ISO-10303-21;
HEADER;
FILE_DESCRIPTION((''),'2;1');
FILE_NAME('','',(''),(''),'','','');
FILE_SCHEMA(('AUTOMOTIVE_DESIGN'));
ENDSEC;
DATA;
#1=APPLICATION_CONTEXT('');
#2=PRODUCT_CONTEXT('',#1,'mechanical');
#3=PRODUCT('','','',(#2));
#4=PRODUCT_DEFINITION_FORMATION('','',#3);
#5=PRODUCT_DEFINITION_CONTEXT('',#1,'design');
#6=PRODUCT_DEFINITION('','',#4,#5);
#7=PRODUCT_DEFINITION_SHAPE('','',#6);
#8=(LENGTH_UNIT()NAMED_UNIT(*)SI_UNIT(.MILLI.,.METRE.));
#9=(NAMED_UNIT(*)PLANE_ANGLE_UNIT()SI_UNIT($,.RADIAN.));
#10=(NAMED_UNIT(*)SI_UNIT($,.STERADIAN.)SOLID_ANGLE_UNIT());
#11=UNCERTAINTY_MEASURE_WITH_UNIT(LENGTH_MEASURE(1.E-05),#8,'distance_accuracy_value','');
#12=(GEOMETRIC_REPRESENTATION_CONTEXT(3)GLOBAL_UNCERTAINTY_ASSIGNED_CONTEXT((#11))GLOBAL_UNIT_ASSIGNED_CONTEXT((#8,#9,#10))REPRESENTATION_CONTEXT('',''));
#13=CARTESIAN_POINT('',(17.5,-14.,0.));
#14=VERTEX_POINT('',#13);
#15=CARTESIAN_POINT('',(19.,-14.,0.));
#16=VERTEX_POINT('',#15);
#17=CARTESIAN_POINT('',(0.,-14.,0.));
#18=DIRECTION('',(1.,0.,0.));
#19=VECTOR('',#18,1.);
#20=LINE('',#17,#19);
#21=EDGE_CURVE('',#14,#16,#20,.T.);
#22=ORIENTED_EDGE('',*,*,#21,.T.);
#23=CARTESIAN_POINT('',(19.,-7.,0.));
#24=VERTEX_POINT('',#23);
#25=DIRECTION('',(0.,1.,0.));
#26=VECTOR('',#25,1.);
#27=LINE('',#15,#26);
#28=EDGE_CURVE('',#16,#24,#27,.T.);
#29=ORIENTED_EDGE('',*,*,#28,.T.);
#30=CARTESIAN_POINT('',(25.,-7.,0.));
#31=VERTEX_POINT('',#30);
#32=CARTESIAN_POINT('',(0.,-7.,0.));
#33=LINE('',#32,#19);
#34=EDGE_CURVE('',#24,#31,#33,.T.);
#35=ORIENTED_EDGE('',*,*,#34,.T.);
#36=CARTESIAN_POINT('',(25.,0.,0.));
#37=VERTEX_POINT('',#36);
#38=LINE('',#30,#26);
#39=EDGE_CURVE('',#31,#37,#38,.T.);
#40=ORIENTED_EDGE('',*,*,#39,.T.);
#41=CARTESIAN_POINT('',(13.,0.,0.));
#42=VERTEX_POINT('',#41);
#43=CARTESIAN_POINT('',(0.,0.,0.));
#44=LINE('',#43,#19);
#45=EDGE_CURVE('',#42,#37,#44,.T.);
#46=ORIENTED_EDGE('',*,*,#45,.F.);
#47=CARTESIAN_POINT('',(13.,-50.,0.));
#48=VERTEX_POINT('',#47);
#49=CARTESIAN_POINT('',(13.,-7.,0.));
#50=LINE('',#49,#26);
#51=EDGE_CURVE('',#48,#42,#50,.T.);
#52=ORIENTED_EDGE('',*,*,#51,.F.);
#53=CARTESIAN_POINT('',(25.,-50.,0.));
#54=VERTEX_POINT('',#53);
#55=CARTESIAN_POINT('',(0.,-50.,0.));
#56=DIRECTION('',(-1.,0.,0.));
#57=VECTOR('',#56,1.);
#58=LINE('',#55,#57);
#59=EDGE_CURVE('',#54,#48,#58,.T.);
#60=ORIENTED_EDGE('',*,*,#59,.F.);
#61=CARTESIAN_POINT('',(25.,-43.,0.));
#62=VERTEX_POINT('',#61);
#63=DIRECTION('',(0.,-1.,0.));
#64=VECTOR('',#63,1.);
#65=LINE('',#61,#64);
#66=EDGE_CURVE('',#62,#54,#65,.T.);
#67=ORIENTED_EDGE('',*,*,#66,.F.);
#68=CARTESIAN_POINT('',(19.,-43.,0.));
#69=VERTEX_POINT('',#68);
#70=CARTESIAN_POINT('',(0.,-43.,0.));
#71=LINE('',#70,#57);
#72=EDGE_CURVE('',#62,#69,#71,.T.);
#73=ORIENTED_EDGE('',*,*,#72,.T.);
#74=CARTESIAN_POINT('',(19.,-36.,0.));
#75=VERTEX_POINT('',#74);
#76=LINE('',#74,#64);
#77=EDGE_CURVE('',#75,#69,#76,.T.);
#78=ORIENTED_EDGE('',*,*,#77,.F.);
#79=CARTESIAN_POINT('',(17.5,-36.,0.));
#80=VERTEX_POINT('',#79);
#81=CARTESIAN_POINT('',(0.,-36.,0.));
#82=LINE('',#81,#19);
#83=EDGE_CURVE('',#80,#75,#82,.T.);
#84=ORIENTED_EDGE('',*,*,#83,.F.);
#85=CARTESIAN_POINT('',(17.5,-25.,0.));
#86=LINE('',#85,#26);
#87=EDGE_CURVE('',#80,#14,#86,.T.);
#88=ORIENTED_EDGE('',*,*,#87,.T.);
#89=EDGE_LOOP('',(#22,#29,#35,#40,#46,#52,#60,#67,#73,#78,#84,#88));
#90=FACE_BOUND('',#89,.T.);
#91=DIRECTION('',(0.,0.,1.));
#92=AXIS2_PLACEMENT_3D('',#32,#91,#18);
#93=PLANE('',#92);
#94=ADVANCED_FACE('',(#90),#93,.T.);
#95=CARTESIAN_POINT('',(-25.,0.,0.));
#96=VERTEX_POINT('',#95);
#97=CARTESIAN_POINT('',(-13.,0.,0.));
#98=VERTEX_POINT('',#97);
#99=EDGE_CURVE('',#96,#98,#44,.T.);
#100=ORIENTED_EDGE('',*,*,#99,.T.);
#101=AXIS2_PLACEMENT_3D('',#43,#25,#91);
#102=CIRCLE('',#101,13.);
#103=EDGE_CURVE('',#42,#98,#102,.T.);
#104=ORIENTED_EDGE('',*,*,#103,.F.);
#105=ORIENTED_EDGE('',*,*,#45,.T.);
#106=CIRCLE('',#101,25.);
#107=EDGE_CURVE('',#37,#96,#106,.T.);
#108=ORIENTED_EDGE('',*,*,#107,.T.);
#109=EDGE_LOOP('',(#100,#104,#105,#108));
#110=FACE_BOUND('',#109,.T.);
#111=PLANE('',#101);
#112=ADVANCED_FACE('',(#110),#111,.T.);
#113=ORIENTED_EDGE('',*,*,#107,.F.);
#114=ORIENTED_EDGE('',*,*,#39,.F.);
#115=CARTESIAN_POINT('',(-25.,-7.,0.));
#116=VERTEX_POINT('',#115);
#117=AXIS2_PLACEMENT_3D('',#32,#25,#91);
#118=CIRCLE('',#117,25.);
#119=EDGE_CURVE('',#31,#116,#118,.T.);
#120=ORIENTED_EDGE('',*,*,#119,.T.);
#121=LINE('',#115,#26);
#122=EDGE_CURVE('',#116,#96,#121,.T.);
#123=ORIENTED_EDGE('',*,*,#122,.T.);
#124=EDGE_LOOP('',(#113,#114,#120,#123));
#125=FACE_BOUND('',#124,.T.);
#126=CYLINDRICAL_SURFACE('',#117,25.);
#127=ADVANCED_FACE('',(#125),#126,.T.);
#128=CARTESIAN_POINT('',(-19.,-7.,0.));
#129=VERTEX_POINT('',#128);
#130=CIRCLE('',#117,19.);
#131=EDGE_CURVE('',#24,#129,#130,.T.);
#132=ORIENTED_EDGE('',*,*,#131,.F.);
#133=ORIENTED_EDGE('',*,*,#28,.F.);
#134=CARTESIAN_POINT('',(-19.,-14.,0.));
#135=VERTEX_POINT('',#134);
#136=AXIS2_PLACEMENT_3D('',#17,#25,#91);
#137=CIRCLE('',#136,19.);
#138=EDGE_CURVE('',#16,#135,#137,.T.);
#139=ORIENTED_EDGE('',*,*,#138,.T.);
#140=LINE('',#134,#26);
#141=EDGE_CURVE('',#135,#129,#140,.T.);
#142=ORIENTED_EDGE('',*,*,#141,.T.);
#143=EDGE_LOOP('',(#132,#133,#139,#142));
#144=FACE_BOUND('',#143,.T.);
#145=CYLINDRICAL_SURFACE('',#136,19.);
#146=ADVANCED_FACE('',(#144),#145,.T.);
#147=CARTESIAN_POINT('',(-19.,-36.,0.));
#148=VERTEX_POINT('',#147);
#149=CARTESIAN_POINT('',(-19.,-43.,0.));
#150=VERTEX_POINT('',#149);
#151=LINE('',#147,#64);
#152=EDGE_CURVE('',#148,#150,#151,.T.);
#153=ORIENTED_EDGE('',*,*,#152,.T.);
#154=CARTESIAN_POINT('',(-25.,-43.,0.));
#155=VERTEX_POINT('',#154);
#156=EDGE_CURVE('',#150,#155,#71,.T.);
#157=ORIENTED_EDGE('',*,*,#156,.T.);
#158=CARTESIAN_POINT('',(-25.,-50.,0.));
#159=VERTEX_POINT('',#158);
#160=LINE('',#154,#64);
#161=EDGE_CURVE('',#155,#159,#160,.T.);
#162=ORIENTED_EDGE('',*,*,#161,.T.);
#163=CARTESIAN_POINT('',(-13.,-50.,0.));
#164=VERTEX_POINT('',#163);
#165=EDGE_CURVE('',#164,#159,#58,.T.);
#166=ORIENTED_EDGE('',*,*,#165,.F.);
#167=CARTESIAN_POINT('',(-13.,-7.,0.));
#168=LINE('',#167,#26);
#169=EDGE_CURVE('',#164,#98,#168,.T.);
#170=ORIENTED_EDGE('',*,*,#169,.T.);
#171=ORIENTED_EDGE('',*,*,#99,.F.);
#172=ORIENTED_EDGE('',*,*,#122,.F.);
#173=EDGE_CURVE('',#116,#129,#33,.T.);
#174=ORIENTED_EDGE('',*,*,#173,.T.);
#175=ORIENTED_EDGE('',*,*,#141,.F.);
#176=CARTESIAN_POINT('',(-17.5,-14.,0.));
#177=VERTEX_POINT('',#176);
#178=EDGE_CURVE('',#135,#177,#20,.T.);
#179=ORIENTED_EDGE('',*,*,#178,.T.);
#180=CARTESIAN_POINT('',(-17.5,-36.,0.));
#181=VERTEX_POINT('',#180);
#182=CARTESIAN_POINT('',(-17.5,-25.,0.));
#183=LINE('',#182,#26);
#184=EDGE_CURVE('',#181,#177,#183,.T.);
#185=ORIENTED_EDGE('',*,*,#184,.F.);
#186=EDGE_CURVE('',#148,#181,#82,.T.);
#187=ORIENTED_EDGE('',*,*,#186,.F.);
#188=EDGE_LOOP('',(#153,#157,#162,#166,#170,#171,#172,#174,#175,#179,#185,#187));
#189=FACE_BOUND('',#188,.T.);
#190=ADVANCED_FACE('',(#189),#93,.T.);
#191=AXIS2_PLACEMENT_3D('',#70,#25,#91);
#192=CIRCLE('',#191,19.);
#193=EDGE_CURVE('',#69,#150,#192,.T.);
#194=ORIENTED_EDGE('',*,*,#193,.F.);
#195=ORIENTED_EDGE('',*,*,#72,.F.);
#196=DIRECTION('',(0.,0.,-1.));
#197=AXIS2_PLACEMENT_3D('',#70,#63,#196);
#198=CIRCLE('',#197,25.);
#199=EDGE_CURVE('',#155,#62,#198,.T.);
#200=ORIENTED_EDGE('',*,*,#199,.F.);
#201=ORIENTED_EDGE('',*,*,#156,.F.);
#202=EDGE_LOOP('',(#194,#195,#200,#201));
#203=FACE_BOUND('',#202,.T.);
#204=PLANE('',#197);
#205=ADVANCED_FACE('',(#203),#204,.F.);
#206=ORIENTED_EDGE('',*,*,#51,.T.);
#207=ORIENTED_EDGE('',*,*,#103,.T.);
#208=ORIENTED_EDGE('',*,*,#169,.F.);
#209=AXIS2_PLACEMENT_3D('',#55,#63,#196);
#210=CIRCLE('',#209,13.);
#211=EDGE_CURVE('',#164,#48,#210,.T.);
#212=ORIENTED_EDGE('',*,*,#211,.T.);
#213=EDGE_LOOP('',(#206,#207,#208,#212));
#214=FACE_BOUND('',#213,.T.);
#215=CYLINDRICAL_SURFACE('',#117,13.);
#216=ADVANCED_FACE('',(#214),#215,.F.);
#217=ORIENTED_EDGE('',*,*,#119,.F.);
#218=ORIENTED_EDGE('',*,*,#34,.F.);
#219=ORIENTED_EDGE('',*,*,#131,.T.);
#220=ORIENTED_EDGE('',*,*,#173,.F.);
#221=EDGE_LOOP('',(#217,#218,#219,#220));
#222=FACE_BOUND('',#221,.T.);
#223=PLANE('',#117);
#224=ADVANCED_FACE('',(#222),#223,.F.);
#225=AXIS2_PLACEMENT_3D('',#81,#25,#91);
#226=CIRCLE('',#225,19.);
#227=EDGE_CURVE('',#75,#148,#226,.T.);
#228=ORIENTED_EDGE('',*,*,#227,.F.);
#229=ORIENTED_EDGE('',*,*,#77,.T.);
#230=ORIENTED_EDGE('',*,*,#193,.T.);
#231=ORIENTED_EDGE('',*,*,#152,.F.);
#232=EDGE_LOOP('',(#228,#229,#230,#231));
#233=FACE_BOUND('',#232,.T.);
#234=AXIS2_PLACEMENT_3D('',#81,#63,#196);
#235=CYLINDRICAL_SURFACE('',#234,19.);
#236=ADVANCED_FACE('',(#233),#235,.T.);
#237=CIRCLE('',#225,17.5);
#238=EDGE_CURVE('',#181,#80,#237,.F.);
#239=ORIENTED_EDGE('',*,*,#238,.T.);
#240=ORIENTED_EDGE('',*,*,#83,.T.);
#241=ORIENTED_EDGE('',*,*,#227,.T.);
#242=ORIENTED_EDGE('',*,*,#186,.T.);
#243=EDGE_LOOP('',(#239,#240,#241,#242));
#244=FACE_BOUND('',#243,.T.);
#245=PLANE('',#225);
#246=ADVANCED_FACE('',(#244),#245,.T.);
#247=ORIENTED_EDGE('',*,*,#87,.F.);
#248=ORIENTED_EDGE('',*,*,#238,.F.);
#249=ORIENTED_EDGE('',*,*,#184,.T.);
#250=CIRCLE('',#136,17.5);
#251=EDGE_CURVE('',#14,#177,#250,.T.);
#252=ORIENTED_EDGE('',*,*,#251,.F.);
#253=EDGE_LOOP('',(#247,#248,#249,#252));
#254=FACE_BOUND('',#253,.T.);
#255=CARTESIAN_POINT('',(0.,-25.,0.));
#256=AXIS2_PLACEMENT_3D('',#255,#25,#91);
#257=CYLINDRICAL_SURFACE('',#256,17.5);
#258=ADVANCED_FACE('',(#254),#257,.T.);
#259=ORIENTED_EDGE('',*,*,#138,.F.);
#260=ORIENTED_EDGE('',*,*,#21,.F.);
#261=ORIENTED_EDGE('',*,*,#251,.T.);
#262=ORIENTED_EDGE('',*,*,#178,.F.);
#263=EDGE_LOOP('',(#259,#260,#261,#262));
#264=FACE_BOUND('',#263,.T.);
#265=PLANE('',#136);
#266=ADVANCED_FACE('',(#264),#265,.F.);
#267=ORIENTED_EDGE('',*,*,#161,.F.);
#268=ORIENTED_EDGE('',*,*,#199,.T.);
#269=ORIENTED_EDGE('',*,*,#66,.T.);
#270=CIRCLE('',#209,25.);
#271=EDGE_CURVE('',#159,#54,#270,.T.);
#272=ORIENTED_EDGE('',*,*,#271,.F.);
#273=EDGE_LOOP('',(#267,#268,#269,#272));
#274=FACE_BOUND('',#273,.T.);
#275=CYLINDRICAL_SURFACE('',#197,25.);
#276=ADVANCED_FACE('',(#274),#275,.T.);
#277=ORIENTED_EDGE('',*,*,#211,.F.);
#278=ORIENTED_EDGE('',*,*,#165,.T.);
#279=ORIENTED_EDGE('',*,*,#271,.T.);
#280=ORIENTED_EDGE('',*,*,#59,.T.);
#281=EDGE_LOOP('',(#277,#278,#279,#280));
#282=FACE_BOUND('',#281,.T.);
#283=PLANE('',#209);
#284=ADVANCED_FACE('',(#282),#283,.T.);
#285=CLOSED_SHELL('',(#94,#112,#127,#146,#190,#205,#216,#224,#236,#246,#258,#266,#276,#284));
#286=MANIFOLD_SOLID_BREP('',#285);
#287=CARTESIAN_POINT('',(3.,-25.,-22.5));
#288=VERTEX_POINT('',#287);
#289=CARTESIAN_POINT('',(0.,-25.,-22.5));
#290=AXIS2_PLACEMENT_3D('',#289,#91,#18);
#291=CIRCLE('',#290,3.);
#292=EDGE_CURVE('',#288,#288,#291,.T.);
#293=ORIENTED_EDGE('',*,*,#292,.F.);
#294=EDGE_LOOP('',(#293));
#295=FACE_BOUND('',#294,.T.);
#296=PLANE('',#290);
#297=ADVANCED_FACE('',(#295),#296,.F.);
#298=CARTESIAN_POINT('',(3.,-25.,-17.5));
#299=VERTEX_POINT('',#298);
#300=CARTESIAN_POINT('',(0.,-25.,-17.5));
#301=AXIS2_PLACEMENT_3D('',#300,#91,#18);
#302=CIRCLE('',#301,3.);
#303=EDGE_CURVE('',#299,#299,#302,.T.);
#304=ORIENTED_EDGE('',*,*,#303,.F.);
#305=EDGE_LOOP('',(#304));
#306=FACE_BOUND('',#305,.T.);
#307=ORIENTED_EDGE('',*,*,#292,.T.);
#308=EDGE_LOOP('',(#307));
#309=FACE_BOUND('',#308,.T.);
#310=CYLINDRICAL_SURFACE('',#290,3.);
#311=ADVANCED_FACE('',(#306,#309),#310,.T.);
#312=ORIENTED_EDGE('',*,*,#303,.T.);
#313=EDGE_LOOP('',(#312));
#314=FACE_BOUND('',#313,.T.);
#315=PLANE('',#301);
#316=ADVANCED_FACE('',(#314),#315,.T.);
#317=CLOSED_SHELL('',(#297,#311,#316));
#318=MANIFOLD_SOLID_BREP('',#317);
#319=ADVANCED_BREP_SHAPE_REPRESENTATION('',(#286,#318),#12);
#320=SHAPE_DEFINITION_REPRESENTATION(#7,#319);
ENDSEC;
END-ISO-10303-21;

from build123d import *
from build123d.topology import SkipClean

# Parameters (mm, degrees)
BOSS_EXTRUDE2_DEPTH  = 7
BOSS_EXTRUDE3_DEPTH  = 7
BOSS_EXTRUDE4_DEPTH  = 18
SKETCH7_R            = 13
CUT_EXTRUDE3_DEPTH   = 18
BOSS_EXTRUDE7_DEPTH  = 7
BOSS_EXTRUDE9_START  = 18
BOSS_EXTRUDE9_DEPTH  = 18
BOSS_EXTRUDE10_START = 7
BOSS_EXTRUDE10_DEPTH = 7
SKETCH19_R           = 3
BOSS_EXTRUDE11_DEPTH = 5


with BuildPart() as part:
    # Sketch2 → Boss-Extrude2 (new body)
    with BuildSketch(Plane(origin=(0, 0, 0), x_dir=(1, 0, 0), z_dir=(0, 1, 0))):
        with BuildLine():
            ThreePointArc((25, 0), (0, 25), (-25, 0))
            Line((-25, 0), (-13, 0))
            ThreePointArc((-13, 0), (0, 13), (13, 0))
            Line((13, 0), (25, 0))
        make_face()
    extrude(amount=-BOSS_EXTRUDE2_DEPTH)

    # Sketch5 → Boss-Extrude3 (add)
    with BuildSketch(Plane(origin=(0, -7, 0), x_dir=(1, 0, 0), z_dir=(0, 1, 0))):
        with BuildLine():
            ThreePointArc((19, 0), (0, 19), (-19, 0))
            Line((-19, 0), (-17.5, 0))
            ThreePointArc((-17.5, 0), (0, 17.5), (17.5, 0))
            Line((17.5, 0), (19, 0))
        make_face()
    extrude(amount=-BOSS_EXTRUDE3_DEPTH)

    # Sketch6 → Boss-Extrude4 (add)
    with BuildSketch(Plane(origin=(0, -7, 0), x_dir=(1, 0, 0), z_dir=(0, 1, 0))):
        with BuildLine():
            Line((-17.5, 0), (17.5, 0))
            ThreePointArc((17.5, 0), (0, 17.5), (-17.5, 0))
        make_face()
    extrude(amount=-BOSS_EXTRUDE4_DEPTH)

    # Sketch7 → Cut-Extrude3 (cut)
    with SkipClean():  # the faces are left unmerged after this step: merging them gives an invalid solid
        with BuildSketch(Plane(origin=(0, -7, 0), x_dir=(1, 0, 0), z_dir=(0, 1, 0))):
            Circle(SKETCH7_R)
        extrude(amount=-CUT_EXTRUDE3_DEPTH, mode=Mode.SUBTRACT)
    add(part.part.scale(1), mode=Mode.REPLACE)  # the faces are merged on a copy



with BuildPart() as body_2:
    # Sketch15 → Boss-Extrude7 (new body)
    with BuildSketch(Plane(origin=(0, -50, 0), x_dir=(-1, 0, 0), z_dir=(0, -1, 0))):
        with BuildLine():
            ThreePointArc((25, 0), (0, 25), (-25, 0))
            Line((-25, 0), (-13, 0))
            ThreePointArc((-13, 0), (0, 13), (13, 0))
            Line((13, 0), (25, 0))
        make_face()
    extrude(amount=-BOSS_EXTRUDE7_DEPTH)


with BuildPart() as part_1:
    add(part.part)

    add(body_2.part)  # Boss-Extrude9 merges body 2
    # Sketch16 → Boss-Extrude9 (add)
    with BuildSketch(Plane(origin=(0, -43, 0), x_dir=(1, 0, 0), z_dir=(0, 1, 0)).offset(BOSS_EXTRUDE9_START)):
        with BuildLine():
            ThreePointArc((17.5, 0), (0, 17.5), (-17.5, 0))
            Line((-17.5, 0), (-13, 0))
            ThreePointArc((-13, 0), (0, 13), (13, 0))
            Line((13, 0), (17.5, 0))
        make_face()
    extrude(amount=-BOSS_EXTRUDE9_DEPTH)

    # Sketch18 → Boss-Extrude10 (add)
    with BuildSketch(Plane(origin=(0, -43, 0), x_dir=(1, 0, 0), z_dir=(0, 1, 0)).offset(BOSS_EXTRUDE10_START)):
        with BuildLine():
            ThreePointArc((19, 0), (0, 19), (-19, 0))
            Line((-19, 0), (-17.5, 0))
            ThreePointArc((-17.5, 0), (0, 17.5), (17.5, 0))
            Line((17.5, 0), (19, 0))
        make_face()
    extrude(amount=-BOSS_EXTRUDE10_DEPTH)


with BuildPart() as body_2_2:
    # Sketch19 → Boss-Extrude11 (new body)
    with BuildSketch(Plane.XY.offset(-17.5)):
        with Locations((0, -25)):
            Circle(SKETCH19_R)
    extrude(amount=-BOSS_EXTRUDE11_DEPTH)


solid = Compound([part_1.part, body_2_2.part])
